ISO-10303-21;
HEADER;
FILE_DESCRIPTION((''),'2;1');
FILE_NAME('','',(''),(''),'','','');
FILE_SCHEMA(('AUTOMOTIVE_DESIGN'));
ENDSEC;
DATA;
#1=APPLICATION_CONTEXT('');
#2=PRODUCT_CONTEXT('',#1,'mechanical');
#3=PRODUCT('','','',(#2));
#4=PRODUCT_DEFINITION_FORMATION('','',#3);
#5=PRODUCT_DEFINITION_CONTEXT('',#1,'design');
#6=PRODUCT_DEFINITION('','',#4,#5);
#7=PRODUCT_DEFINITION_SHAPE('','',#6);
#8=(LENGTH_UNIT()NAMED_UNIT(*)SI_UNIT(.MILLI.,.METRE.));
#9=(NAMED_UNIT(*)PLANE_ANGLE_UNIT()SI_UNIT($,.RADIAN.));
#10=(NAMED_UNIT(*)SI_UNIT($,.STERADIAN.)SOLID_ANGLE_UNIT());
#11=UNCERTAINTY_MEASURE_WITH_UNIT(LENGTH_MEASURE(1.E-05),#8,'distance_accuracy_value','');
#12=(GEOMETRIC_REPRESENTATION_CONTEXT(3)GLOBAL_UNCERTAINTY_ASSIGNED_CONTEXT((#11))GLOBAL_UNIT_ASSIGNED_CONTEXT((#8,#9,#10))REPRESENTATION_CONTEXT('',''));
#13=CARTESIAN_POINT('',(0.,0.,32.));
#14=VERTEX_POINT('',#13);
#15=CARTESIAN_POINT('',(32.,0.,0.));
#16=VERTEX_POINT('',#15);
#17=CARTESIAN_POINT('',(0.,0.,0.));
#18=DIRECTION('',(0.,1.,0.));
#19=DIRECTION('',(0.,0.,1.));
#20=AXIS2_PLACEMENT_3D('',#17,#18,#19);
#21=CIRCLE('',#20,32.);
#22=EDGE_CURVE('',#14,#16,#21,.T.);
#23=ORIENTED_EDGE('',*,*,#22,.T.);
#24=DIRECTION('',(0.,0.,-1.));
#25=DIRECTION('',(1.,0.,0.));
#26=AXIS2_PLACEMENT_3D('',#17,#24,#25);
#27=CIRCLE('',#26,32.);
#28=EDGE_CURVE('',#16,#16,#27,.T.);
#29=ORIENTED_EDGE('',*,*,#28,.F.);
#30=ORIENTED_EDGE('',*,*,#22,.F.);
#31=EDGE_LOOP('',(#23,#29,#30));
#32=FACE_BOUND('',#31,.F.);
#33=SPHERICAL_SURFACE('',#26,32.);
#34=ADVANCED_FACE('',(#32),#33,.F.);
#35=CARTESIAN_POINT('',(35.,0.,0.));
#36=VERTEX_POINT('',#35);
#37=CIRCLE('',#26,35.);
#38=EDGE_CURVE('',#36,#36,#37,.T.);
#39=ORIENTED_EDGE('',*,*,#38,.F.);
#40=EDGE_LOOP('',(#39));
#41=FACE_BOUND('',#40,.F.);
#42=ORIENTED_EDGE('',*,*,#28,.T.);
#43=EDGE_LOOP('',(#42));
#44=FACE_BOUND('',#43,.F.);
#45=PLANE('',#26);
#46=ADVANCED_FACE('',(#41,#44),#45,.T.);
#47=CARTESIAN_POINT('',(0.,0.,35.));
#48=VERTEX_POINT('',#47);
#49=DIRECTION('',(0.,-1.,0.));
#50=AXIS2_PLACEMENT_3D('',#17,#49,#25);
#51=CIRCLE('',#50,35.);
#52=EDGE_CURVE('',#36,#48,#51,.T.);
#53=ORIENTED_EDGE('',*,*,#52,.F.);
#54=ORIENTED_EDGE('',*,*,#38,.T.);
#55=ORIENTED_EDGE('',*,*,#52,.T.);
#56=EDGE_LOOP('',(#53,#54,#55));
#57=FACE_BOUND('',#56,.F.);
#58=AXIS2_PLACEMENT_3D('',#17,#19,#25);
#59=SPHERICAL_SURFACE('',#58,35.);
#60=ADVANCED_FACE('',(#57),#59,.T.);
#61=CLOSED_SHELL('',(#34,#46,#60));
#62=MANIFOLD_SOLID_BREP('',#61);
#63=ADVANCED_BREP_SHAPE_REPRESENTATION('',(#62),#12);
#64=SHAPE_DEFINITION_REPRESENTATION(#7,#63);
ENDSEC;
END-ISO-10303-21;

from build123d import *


# Not quite as in the source:
# - the program builds the solid bodies; features that only make, move or delete a surface that nothing else refers to are left out


with BuildPart() as f1:
    # F0 (on Front) → F1 (revolve)
    with BuildSketch(Plane.XZ):
        with BuildLine():
            Line((32, 0), (35, 0))
            ThreePointArc((35, 0), (24.7487373415, 24.7487373415), (0, 35))
            Line((0, 35), (0, 32))
            ThreePointArc((0, 32), (22.627416998, 22.627416998), (32, 0))
        make_face()
    revolve(axis=Axis((0, 0, 33.5), (0, 0, -1)))


solid = f1.part
